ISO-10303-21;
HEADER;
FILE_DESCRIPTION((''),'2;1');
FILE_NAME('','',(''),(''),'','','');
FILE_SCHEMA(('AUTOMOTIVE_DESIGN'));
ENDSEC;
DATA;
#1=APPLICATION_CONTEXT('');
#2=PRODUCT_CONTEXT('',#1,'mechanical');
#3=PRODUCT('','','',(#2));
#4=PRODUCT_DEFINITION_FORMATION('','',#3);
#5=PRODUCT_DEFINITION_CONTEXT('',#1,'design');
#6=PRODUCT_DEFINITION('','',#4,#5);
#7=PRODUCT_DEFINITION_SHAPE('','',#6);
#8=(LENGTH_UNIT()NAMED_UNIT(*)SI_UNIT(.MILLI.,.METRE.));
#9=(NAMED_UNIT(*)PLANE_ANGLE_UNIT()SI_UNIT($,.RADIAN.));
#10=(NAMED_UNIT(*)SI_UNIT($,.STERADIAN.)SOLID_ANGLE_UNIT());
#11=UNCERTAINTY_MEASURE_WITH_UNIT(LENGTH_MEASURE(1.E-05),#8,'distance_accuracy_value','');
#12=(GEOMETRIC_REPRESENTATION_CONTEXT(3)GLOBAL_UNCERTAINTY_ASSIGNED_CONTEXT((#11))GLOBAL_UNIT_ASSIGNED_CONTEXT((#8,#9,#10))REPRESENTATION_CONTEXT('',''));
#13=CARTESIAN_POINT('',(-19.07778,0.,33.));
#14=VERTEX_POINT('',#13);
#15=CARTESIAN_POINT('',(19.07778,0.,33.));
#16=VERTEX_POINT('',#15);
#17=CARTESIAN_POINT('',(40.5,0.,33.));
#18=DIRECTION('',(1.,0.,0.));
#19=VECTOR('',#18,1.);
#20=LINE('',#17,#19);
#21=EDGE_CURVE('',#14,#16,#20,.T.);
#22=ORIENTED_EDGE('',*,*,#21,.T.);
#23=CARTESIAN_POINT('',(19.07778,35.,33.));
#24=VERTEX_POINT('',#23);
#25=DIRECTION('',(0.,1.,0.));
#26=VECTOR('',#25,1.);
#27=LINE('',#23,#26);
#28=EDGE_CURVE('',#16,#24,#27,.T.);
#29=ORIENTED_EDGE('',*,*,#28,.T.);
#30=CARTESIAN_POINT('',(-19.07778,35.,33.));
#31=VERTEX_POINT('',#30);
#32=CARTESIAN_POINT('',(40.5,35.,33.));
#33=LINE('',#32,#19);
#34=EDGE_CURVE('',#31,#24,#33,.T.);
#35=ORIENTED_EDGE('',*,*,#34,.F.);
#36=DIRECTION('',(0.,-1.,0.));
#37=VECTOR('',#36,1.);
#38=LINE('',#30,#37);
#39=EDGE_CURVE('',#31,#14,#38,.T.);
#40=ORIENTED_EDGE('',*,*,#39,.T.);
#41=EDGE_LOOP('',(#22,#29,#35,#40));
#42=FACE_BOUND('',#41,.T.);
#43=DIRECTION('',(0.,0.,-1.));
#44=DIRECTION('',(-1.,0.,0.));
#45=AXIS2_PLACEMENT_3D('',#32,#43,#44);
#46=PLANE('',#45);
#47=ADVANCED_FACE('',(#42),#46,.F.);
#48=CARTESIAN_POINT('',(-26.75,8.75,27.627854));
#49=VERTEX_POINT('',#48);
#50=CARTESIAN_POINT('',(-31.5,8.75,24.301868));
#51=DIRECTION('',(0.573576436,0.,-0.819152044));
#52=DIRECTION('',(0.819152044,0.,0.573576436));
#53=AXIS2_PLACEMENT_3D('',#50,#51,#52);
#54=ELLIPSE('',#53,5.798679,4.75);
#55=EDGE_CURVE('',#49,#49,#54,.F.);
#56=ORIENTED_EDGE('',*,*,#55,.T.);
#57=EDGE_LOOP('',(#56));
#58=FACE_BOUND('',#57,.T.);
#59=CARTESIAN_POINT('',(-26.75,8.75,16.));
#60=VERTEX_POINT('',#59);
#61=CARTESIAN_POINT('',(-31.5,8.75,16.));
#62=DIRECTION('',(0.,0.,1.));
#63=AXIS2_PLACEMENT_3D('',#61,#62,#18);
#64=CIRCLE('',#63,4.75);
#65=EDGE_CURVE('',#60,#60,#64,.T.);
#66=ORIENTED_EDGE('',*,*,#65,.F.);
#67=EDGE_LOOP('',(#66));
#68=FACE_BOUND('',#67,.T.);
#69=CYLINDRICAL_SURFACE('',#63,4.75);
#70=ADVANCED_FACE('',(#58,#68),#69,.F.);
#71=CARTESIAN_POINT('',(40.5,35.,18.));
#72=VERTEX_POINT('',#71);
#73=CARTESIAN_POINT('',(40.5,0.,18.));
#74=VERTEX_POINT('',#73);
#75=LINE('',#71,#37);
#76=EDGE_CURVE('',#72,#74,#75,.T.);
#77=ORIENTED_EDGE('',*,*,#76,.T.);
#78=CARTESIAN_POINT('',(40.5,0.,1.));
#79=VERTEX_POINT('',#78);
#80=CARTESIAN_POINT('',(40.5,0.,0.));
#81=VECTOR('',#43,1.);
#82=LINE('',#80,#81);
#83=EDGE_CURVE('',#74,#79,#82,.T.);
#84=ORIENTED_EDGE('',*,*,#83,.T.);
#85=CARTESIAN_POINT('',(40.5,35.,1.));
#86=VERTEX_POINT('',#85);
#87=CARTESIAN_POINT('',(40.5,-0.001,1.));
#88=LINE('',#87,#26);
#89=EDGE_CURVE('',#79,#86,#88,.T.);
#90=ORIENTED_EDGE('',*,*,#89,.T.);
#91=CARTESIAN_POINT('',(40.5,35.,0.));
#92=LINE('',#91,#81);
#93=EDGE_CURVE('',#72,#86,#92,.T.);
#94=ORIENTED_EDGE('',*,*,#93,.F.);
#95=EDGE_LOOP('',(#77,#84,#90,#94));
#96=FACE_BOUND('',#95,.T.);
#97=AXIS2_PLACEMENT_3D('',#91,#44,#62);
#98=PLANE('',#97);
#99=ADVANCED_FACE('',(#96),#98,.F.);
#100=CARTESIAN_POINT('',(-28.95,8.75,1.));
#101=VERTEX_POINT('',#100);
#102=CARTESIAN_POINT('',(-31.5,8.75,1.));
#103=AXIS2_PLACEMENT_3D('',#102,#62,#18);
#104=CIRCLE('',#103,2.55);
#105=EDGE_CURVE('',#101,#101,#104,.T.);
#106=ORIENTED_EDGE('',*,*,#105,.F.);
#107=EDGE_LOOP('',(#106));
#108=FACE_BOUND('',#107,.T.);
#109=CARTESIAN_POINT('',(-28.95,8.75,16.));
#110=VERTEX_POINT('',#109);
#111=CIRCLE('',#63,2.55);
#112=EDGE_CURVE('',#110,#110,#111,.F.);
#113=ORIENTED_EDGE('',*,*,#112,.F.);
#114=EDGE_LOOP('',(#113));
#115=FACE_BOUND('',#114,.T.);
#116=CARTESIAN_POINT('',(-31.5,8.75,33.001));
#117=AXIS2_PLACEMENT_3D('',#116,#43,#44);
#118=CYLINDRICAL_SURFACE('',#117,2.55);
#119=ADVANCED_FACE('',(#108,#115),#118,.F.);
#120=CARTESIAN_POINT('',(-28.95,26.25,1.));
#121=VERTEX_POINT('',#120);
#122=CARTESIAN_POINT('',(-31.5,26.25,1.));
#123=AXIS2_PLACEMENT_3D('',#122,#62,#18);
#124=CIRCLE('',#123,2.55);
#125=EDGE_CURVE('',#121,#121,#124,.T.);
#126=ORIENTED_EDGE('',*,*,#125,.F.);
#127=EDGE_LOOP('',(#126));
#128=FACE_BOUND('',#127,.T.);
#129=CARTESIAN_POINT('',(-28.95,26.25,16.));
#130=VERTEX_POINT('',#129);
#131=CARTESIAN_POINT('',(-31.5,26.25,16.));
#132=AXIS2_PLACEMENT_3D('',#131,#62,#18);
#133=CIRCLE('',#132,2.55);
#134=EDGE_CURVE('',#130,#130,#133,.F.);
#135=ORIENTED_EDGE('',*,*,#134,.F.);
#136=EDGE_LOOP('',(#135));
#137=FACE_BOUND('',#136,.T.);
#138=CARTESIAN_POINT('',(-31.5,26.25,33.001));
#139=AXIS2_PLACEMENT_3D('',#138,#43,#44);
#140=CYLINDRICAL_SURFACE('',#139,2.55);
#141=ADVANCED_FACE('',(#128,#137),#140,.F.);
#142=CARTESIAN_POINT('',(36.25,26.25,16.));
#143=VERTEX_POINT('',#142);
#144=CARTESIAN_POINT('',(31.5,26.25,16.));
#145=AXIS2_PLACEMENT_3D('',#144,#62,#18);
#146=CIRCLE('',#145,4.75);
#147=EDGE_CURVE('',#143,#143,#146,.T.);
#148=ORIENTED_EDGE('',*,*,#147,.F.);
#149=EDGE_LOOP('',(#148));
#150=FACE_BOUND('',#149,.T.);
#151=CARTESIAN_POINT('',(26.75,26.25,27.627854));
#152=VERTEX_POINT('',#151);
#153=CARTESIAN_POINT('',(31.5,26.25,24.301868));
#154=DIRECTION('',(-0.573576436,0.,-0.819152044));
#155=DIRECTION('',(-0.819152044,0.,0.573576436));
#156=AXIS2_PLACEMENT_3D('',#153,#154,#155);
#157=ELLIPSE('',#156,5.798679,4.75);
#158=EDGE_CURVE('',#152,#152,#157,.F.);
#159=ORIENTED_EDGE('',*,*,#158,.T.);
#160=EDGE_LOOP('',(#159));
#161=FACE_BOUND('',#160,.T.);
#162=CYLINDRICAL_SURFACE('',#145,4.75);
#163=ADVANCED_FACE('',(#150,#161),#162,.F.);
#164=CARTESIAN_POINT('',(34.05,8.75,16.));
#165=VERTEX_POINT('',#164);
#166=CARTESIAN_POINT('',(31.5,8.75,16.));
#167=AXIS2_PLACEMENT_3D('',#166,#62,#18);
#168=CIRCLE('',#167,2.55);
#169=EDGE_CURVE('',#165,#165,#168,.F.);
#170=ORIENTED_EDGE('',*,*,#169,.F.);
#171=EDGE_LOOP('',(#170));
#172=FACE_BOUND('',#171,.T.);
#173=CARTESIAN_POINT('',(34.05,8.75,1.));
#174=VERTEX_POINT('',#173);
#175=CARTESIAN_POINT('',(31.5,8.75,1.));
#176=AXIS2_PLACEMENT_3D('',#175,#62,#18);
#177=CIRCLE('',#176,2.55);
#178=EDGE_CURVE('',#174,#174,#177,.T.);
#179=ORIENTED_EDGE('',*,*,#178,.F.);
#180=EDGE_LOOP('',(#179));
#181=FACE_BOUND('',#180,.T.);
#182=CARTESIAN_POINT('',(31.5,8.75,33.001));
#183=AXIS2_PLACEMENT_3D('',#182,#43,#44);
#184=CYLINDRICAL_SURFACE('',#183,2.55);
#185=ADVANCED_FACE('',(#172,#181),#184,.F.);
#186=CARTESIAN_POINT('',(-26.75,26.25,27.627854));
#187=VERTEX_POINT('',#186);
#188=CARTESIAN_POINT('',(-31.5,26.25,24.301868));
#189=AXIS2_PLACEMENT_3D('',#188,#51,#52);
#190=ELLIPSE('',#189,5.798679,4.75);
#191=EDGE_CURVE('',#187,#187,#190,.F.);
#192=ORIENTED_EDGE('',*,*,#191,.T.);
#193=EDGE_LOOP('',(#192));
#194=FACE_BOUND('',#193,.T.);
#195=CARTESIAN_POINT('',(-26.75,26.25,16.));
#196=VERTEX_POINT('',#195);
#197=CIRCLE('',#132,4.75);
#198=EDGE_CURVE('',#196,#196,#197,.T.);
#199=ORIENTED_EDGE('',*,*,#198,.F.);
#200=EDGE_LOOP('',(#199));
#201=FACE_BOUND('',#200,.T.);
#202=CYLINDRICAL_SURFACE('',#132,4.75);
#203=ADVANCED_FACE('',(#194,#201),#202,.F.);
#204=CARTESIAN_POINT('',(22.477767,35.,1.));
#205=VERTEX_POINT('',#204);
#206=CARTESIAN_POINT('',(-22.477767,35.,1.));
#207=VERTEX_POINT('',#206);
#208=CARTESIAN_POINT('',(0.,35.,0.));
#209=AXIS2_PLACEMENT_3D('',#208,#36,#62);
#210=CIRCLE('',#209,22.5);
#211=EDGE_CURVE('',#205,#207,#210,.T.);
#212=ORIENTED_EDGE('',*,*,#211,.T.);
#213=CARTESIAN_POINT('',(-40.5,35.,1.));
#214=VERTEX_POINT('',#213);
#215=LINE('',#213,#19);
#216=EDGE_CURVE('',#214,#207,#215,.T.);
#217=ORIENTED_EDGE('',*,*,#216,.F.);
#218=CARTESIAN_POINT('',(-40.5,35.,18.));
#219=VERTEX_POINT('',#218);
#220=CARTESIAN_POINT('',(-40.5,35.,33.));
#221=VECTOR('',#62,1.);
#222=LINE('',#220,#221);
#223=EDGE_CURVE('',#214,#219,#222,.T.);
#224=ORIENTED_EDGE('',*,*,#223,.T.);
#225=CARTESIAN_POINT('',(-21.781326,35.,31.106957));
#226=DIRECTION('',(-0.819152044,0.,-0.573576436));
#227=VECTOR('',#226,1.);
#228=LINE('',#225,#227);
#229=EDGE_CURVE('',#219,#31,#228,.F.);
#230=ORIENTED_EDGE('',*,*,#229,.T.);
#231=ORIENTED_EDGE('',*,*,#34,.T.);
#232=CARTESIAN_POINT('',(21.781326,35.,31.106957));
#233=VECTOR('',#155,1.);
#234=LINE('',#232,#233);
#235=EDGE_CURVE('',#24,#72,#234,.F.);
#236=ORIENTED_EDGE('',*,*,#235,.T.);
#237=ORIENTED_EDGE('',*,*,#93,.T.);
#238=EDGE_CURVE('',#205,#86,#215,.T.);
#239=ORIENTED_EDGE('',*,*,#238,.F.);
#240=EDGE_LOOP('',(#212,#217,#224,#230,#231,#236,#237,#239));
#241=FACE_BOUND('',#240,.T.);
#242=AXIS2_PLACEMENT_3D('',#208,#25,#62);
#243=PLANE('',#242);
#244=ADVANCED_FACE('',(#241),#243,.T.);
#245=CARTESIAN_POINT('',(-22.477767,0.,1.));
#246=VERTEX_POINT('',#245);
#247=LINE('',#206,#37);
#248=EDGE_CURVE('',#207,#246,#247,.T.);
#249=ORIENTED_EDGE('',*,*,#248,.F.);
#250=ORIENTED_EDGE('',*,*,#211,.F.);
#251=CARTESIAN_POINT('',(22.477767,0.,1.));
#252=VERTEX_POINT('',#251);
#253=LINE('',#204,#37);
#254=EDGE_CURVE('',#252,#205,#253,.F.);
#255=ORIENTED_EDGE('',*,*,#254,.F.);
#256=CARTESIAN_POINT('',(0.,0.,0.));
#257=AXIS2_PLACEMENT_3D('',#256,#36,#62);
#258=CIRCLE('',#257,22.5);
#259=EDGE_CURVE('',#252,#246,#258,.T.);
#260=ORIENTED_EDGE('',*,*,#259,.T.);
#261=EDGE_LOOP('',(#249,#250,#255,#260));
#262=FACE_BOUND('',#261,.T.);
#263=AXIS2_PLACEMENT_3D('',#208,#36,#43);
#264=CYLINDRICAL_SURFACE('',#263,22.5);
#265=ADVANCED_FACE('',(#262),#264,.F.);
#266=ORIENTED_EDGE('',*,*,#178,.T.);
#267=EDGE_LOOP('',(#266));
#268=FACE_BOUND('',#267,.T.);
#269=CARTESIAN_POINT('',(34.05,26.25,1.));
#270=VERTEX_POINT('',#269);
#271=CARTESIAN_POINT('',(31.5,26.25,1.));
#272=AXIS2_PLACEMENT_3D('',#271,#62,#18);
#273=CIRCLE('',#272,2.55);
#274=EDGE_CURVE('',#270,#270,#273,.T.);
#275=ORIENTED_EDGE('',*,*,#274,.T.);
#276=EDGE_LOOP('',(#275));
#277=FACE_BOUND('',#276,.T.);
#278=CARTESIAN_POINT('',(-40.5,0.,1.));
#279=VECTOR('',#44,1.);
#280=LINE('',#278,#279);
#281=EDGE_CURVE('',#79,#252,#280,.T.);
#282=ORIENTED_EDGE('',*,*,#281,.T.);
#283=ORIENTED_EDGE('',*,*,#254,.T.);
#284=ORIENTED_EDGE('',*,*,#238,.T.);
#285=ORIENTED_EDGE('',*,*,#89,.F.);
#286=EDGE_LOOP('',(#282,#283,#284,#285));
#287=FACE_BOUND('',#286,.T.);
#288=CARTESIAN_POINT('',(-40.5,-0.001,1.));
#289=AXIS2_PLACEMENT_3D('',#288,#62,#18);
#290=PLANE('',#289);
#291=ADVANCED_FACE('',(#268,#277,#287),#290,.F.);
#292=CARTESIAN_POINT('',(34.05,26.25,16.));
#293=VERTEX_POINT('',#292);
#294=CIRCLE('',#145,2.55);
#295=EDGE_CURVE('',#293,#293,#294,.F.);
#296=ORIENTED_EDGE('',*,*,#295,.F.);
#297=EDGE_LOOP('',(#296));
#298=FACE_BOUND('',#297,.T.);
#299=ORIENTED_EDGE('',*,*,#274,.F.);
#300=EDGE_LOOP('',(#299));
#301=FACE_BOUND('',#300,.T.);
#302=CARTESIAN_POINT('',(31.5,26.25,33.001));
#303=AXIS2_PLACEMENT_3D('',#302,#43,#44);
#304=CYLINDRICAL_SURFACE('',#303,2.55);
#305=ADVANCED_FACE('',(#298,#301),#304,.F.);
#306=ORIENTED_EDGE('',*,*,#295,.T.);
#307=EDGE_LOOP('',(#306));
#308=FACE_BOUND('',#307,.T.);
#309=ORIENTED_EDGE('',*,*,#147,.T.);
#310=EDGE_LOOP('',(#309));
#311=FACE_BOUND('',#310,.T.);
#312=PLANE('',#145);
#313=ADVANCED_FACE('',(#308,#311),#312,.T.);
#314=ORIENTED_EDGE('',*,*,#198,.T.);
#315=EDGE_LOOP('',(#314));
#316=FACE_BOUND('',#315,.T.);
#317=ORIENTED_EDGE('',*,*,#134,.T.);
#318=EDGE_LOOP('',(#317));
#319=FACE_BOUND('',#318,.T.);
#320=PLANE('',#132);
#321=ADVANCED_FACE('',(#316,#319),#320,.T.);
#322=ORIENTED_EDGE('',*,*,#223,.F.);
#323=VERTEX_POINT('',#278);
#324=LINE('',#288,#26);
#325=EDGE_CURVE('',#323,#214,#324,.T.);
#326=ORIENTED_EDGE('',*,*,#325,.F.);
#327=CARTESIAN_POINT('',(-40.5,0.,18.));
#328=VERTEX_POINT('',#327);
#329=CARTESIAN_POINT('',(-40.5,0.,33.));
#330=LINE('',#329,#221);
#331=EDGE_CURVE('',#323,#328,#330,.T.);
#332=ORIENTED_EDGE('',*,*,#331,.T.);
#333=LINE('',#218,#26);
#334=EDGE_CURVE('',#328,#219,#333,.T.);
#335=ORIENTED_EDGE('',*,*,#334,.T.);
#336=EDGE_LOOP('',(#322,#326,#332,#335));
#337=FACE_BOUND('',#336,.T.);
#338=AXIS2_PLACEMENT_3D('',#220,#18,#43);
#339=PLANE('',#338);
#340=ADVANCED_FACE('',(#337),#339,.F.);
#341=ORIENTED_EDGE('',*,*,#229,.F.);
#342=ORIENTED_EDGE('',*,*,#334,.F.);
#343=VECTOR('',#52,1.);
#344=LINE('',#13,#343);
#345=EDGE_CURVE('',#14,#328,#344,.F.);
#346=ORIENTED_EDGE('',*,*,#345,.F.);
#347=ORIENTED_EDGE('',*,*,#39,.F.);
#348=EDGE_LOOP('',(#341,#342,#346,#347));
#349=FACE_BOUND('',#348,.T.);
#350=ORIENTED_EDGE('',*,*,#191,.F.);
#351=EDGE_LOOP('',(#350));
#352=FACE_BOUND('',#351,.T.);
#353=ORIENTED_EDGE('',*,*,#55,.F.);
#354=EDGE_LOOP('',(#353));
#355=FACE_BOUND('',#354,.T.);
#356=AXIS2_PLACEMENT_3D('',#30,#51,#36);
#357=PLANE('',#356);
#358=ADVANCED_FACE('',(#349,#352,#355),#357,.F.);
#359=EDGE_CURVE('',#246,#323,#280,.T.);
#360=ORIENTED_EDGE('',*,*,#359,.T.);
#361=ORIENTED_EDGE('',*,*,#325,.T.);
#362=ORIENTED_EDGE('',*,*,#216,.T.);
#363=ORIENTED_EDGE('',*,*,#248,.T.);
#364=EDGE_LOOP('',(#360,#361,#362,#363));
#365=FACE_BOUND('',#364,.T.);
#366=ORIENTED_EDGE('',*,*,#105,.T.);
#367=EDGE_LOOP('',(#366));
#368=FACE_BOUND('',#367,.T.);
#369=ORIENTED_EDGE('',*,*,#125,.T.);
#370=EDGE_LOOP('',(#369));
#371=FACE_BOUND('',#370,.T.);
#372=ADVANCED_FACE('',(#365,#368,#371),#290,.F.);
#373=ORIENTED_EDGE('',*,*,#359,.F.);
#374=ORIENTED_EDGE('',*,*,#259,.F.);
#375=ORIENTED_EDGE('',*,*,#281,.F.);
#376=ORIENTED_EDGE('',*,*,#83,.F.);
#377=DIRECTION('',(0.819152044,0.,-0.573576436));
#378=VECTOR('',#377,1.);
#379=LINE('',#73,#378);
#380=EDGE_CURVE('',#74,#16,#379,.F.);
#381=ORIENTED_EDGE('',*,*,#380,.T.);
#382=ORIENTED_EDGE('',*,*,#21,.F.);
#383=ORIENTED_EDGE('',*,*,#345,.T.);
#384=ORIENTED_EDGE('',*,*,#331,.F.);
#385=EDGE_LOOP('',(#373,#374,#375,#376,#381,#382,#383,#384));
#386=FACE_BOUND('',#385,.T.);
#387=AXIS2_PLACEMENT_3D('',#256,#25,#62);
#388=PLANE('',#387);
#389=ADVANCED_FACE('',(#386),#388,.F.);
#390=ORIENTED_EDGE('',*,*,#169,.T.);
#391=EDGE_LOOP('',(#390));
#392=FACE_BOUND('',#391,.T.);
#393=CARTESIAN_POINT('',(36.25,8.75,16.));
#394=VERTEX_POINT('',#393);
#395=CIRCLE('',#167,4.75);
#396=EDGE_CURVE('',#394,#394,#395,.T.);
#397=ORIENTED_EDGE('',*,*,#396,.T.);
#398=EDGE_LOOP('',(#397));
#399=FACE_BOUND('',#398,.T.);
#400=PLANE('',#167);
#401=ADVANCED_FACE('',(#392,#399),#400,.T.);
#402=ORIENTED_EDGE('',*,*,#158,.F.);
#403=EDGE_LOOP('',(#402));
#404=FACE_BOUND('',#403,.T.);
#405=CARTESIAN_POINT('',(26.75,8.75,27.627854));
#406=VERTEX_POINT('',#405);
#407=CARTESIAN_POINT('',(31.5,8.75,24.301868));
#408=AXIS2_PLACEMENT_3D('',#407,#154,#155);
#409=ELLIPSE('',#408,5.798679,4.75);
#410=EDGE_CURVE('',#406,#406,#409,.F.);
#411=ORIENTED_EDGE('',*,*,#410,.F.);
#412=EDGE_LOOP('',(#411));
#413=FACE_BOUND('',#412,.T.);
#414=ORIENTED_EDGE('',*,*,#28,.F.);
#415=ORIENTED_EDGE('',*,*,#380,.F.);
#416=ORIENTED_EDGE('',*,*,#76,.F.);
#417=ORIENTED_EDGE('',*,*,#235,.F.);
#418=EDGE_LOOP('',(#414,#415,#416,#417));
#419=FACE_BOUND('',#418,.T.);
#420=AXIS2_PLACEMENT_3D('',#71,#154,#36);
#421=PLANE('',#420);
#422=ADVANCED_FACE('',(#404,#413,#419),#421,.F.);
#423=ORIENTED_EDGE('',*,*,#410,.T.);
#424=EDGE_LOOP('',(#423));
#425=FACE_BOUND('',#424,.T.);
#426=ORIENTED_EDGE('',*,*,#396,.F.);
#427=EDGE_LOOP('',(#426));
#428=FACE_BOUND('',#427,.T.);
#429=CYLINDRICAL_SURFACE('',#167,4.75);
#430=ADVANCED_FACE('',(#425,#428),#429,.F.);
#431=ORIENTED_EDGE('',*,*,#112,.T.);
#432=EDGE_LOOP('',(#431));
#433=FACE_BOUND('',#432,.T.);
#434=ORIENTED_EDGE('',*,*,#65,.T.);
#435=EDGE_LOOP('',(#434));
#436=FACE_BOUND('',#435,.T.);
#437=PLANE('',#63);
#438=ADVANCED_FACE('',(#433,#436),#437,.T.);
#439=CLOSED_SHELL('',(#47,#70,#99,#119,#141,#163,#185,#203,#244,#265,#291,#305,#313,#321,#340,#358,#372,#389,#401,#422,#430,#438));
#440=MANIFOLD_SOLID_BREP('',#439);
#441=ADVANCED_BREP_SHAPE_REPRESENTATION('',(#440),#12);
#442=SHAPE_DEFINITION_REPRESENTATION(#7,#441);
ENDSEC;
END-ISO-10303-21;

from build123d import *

# Parameters (mm, degrees)
SALIENTE_EXTRUIR1_DEPTH = 35
CORTAR_EXTRUIR1_REACH   = 64.883
CROQUIS2_R              = 2.55
CROQUIS3_R              = 4.75
CORTAR_EXTRUIR2_DEPTH   = 17
CHAFL_N1_SIZE           = 15
CHAFL_N1_SIZE_2         = 21.422220101
CORTAR_EXTRUIR3_START   = -35
CROQUIS4_W              = 81
CROQUIS4_H              = 1
CORTAR_EXTRUIR3_DEPTH   = 35


with BuildPart() as part:
    # Croquis1 → Saliente-Extruir1 (new body)
    with BuildSketch(Plane(origin=(0, 0, 0), x_dir=(1, 0, 0), z_dir=(0, 1, 0))):
        with BuildLine():
            Line((22.5, 0), (40.5, 0))
            Line((40.5, 0), (40.5, -33))
            Line((40.5, -33), (-40.5, -33))
            Line((-40.5, -33), (-40.5, 0))
            Line((-40.5, 0), (-22.5, 0))
            ThreePointArc((-22.5, 0), (0, -22.5), (22.5, 0))
        make_face()
    extrude(amount=SALIENTE_EXTRUIR1_DEPTH)

    # Croquis2 → Cortar-Extruir1 (cut, up to next)
    with BuildSketch(Plane(origin=(0, 0, 0), x_dir=(-1, 0, 0), z_dir=(0, 0, -1)), mode=Mode.PRIVATE) as cortar_extruir1_sk1:
        with Locations((-31.5, 26.25)):
            Circle(CROQUIS2_R)
    cortar_extruir1_tool1 = extrude(cortar_extruir1_sk1.sketch, amount=-CORTAR_EXTRUIR1_REACH, mode=Mode.PRIVATE) & part.part
    # Croquis2 → Cortar-Extruir1 (cut, up to next)
    with BuildSketch(Plane(origin=(0, 0, 0), x_dir=(-1, 0, 0), z_dir=(0, 0, -1)), mode=Mode.PRIVATE) as cortar_extruir1_sk2:
        with Locations((-31.5, 8.75)):
            Circle(CROQUIS2_R)
    cortar_extruir1_tool2 = extrude(cortar_extruir1_sk2.sketch, amount=-CORTAR_EXTRUIR1_REACH, mode=Mode.PRIVATE) & part.part
    # Croquis2 → Cortar-Extruir1 (cut, up to next)
    with BuildSketch(Plane(origin=(0, 0, 0), x_dir=(-1, 0, 0), z_dir=(0, 0, -1)), mode=Mode.PRIVATE) as cortar_extruir1_sk3:
        with Locations((31.5, 8.75)):
            Circle(CROQUIS2_R)
    cortar_extruir1_tool3 = extrude(cortar_extruir1_sk3.sketch, amount=-CORTAR_EXTRUIR1_REACH, mode=Mode.PRIVATE) & part.part
    # Croquis2 → Cortar-Extruir1 (cut, up to next)
    with BuildSketch(Plane(origin=(0, 0, 0), x_dir=(-1, 0, 0), z_dir=(0, 0, -1)), mode=Mode.PRIVATE) as cortar_extruir1_sk4:
        with Locations((31.5, 26.25)):
            Circle(CROQUIS2_R)
    cortar_extruir1_tool4 = extrude(cortar_extruir1_sk4.sketch, amount=-CORTAR_EXTRUIR1_REACH, mode=Mode.PRIVATE) & part.part
    add(cortar_extruir1_tool1.solids().sort_by_distance((31.5, 26.25, 0))[0], mode=Mode.SUBTRACT)
    add(cortar_extruir1_tool2.solids().sort_by_distance((31.5, 8.75, 0))[0], mode=Mode.SUBTRACT)
    add(cortar_extruir1_tool3.solids().sort_by_distance((-31.5, 8.75, 0))[0], mode=Mode.SUBTRACT)
    add(cortar_extruir1_tool4.solids().sort_by_distance((-31.5, 26.25, 0))[0], mode=Mode.SUBTRACT)

    # Croquis3 → Cortar-Extruir2 (cut)
    with BuildSketch(Plane.XY.offset(33)):
        with Locations((-31.5, 26.25)):
            Circle(CROQUIS3_R)
        with Locations((-31.5, 8.75)):
            Circle(CROQUIS3_R)
        with Locations((31.5, 26.25)):
            Circle(CROQUIS3_R)
        with Locations((31.5, 8.75)):
            Circle(CROQUIS3_R)
    extrude(amount=-CORTAR_EXTRUIR2_DEPTH, mode=Mode.SUBTRACT)

    # Chaflán1
    # the kernel refuses this chamfer: 21.422220101, 15 mm, written as the material it takes off along each edge
    with BuildSketch(Plane(origin=(40.5, -55.3240023, 33), x_dir=(0.045263737714021264, 0, -0.9989750717851553), z_dir=(0, 1, 0))) as chafl_n1_piece_1:
        Polygon((CHAFL_N1_SIZE * 0.998975071785, CHAFL_N1_SIZE * 0.045263737714), (-CHAFL_N1_SIZE_2 * 0.0452637377143, CHAFL_N1_SIZE_2 * 0.998975071791), (0, 0), align=None)
    extrude(amount=145.6480046, mode=Mode.SUBTRACT)
    with BuildSketch(Plane(origin=(-40.5, -55.3240023, 33), x_dir=(0.9997533347641299, 0, 0.022209674198456895), z_dir=(0, 1, 0))) as chafl_n1_piece_2:
        Polygon((CHAFL_N1_SIZE_2 * 0.99975333477, CHAFL_N1_SIZE_2 * 0.0222096741986), (-CHAFL_N1_SIZE * 0.0222096741985, CHAFL_N1_SIZE * 0.999753334764), (0, 0), align=None)
    extrude(amount=145.6480046, mode=Mode.SUBTRACT)

    # Croquis4 → Cortar-Extruir3 (cut)
    with BuildSketch(Plane(origin=(0, 35, 0), x_dir=(1, 0, 0), z_dir=(0, 1, 0)).offset(CORTAR_EXTRUIR3_START)):
        with Locations((0, -0.5)):
            Rectangle(CROQUIS4_W, CROQUIS4_H)
    extrude(amount=CORTAR_EXTRUIR3_DEPTH, mode=Mode.SUBTRACT)


solid = part.part
